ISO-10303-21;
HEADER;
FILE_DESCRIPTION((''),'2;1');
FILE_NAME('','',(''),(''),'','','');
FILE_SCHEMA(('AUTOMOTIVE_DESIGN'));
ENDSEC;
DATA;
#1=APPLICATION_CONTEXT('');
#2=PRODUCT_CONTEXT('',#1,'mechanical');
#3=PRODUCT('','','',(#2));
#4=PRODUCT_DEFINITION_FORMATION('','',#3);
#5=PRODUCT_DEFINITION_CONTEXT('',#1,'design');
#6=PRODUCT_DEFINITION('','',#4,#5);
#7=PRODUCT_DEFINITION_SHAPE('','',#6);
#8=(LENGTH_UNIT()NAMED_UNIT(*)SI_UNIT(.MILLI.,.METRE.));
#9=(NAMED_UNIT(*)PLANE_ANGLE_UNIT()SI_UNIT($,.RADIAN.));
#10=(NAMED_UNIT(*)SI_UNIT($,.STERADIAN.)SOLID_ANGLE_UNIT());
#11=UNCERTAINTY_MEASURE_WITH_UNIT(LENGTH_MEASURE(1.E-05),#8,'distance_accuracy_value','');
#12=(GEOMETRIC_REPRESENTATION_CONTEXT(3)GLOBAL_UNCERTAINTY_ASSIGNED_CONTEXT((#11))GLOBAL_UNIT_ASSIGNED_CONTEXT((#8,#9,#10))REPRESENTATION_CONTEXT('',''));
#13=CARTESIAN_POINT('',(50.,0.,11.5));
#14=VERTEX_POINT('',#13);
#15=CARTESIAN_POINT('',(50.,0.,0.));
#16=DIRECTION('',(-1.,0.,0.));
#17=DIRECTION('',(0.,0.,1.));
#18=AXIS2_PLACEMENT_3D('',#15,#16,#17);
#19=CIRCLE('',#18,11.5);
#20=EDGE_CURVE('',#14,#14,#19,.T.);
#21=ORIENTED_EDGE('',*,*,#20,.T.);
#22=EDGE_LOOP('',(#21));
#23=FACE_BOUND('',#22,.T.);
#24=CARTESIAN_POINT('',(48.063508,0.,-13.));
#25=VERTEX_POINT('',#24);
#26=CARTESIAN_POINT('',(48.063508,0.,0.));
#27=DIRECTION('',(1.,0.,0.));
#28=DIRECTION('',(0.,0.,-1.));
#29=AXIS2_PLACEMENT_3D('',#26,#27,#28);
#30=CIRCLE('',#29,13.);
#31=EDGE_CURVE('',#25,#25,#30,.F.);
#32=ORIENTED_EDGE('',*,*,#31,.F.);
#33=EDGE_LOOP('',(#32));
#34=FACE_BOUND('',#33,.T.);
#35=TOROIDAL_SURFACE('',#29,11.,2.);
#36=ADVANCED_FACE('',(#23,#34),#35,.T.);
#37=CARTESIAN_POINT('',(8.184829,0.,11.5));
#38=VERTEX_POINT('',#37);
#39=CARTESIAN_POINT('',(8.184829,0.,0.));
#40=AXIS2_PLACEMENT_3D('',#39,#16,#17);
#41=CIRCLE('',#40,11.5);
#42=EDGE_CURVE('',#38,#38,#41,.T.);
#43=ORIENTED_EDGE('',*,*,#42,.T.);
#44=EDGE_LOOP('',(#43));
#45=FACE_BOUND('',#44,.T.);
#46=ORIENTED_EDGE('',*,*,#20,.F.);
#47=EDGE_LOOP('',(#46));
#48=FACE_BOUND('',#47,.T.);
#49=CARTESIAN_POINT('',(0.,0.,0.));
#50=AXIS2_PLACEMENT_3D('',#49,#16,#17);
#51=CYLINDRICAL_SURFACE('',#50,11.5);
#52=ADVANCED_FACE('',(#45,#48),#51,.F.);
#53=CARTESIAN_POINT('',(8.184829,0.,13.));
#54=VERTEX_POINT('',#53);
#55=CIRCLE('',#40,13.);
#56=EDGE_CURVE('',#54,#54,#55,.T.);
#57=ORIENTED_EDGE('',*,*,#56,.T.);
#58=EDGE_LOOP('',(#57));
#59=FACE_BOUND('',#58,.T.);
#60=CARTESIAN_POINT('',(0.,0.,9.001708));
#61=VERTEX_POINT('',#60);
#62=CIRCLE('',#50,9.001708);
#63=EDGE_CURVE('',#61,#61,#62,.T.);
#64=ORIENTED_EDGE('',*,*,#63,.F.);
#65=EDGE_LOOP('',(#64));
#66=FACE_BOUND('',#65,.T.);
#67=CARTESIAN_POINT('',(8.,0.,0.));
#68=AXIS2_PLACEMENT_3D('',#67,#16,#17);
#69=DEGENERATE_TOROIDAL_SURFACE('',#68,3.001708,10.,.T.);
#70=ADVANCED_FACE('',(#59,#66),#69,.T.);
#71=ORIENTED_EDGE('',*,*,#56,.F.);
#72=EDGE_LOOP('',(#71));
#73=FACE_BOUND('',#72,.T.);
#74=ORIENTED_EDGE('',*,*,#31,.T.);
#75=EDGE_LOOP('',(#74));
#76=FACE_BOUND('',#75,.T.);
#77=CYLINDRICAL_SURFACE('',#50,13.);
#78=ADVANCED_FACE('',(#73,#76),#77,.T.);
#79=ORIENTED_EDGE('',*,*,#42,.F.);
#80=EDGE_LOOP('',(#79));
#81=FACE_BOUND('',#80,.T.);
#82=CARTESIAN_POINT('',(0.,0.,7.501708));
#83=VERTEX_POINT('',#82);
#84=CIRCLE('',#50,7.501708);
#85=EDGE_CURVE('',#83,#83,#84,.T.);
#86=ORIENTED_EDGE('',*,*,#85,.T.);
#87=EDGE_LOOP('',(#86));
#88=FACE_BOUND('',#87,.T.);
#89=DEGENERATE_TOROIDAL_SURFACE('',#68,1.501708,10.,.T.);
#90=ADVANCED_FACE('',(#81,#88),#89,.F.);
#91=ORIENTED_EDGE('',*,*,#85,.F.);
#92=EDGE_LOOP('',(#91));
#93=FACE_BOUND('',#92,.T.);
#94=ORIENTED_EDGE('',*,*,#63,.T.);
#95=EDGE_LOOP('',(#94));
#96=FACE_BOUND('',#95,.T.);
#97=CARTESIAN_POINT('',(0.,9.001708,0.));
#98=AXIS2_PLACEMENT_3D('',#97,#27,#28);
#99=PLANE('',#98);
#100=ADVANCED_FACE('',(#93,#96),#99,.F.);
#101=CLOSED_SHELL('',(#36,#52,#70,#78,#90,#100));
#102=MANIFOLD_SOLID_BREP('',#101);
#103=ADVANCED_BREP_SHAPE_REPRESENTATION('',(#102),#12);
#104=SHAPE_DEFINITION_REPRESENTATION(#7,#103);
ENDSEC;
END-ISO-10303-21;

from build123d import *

# Parameters (mm, degrees)
FILLET2_R = 2


with BuildPart() as part:
    # Sketch1 → Revolve1 (revolve)
    with BuildSketch(Plane.XY, mode=Mode.PRIVATE) as revolve1_sk:
        with BuildLine():
            Line((8.184829328, 13), (50, 13))
            Line((50, 13), (50, 11.5))
            Line((50, 11.5), (8.184829328, 11.5))
            ThreePointArc((8.184829328, 11.5), (3.610716754, 10.486929027), (0, 7.50170824))
            Line((0, 7.50170824), (0, 9.00170824))
            ThreePointArc((0, 9.00170824), (3.610716754, 11.986929027), (8.184829328, 13))
        make_face()
    revolve(revolve1_sk.sketch.rotate(Axis((0, 0, 0), (1, 0, 0)), 90), axis=Axis((0, 0, 0), (1, 0, 0)))

    # Fillet2
    # the kernel refuses this fillet: 2 mm, written as the material it takes off along each edge
    with BuildSketch(Plane(origin=(50, 0, 0), x_dir=(0, 0, 1), z_dir=(0, 1, 0))) as fillet2_piece_1:
        with BuildLine():
            CenterArc((11, -1.936491673), FILLET2_R, 0, 75.522487814)
            Line((11.5, 0), (11.51, 0.038729833))
            ThreePointArc((11.51, 0.038729833), (12.25, 0.04), (13, 0.04))
            Line((13, 0.04), (13.04, 0))
            Line((13.04, 0), (13.04, -1.936491673))
            Line((13.04, -1.936491673), (13, -1.936491673))
        make_face()
    revolve(axis=Axis((50, 0, 0), (1, 0, 0)), mode=Mode.SUBTRACT)


solid = part.part
